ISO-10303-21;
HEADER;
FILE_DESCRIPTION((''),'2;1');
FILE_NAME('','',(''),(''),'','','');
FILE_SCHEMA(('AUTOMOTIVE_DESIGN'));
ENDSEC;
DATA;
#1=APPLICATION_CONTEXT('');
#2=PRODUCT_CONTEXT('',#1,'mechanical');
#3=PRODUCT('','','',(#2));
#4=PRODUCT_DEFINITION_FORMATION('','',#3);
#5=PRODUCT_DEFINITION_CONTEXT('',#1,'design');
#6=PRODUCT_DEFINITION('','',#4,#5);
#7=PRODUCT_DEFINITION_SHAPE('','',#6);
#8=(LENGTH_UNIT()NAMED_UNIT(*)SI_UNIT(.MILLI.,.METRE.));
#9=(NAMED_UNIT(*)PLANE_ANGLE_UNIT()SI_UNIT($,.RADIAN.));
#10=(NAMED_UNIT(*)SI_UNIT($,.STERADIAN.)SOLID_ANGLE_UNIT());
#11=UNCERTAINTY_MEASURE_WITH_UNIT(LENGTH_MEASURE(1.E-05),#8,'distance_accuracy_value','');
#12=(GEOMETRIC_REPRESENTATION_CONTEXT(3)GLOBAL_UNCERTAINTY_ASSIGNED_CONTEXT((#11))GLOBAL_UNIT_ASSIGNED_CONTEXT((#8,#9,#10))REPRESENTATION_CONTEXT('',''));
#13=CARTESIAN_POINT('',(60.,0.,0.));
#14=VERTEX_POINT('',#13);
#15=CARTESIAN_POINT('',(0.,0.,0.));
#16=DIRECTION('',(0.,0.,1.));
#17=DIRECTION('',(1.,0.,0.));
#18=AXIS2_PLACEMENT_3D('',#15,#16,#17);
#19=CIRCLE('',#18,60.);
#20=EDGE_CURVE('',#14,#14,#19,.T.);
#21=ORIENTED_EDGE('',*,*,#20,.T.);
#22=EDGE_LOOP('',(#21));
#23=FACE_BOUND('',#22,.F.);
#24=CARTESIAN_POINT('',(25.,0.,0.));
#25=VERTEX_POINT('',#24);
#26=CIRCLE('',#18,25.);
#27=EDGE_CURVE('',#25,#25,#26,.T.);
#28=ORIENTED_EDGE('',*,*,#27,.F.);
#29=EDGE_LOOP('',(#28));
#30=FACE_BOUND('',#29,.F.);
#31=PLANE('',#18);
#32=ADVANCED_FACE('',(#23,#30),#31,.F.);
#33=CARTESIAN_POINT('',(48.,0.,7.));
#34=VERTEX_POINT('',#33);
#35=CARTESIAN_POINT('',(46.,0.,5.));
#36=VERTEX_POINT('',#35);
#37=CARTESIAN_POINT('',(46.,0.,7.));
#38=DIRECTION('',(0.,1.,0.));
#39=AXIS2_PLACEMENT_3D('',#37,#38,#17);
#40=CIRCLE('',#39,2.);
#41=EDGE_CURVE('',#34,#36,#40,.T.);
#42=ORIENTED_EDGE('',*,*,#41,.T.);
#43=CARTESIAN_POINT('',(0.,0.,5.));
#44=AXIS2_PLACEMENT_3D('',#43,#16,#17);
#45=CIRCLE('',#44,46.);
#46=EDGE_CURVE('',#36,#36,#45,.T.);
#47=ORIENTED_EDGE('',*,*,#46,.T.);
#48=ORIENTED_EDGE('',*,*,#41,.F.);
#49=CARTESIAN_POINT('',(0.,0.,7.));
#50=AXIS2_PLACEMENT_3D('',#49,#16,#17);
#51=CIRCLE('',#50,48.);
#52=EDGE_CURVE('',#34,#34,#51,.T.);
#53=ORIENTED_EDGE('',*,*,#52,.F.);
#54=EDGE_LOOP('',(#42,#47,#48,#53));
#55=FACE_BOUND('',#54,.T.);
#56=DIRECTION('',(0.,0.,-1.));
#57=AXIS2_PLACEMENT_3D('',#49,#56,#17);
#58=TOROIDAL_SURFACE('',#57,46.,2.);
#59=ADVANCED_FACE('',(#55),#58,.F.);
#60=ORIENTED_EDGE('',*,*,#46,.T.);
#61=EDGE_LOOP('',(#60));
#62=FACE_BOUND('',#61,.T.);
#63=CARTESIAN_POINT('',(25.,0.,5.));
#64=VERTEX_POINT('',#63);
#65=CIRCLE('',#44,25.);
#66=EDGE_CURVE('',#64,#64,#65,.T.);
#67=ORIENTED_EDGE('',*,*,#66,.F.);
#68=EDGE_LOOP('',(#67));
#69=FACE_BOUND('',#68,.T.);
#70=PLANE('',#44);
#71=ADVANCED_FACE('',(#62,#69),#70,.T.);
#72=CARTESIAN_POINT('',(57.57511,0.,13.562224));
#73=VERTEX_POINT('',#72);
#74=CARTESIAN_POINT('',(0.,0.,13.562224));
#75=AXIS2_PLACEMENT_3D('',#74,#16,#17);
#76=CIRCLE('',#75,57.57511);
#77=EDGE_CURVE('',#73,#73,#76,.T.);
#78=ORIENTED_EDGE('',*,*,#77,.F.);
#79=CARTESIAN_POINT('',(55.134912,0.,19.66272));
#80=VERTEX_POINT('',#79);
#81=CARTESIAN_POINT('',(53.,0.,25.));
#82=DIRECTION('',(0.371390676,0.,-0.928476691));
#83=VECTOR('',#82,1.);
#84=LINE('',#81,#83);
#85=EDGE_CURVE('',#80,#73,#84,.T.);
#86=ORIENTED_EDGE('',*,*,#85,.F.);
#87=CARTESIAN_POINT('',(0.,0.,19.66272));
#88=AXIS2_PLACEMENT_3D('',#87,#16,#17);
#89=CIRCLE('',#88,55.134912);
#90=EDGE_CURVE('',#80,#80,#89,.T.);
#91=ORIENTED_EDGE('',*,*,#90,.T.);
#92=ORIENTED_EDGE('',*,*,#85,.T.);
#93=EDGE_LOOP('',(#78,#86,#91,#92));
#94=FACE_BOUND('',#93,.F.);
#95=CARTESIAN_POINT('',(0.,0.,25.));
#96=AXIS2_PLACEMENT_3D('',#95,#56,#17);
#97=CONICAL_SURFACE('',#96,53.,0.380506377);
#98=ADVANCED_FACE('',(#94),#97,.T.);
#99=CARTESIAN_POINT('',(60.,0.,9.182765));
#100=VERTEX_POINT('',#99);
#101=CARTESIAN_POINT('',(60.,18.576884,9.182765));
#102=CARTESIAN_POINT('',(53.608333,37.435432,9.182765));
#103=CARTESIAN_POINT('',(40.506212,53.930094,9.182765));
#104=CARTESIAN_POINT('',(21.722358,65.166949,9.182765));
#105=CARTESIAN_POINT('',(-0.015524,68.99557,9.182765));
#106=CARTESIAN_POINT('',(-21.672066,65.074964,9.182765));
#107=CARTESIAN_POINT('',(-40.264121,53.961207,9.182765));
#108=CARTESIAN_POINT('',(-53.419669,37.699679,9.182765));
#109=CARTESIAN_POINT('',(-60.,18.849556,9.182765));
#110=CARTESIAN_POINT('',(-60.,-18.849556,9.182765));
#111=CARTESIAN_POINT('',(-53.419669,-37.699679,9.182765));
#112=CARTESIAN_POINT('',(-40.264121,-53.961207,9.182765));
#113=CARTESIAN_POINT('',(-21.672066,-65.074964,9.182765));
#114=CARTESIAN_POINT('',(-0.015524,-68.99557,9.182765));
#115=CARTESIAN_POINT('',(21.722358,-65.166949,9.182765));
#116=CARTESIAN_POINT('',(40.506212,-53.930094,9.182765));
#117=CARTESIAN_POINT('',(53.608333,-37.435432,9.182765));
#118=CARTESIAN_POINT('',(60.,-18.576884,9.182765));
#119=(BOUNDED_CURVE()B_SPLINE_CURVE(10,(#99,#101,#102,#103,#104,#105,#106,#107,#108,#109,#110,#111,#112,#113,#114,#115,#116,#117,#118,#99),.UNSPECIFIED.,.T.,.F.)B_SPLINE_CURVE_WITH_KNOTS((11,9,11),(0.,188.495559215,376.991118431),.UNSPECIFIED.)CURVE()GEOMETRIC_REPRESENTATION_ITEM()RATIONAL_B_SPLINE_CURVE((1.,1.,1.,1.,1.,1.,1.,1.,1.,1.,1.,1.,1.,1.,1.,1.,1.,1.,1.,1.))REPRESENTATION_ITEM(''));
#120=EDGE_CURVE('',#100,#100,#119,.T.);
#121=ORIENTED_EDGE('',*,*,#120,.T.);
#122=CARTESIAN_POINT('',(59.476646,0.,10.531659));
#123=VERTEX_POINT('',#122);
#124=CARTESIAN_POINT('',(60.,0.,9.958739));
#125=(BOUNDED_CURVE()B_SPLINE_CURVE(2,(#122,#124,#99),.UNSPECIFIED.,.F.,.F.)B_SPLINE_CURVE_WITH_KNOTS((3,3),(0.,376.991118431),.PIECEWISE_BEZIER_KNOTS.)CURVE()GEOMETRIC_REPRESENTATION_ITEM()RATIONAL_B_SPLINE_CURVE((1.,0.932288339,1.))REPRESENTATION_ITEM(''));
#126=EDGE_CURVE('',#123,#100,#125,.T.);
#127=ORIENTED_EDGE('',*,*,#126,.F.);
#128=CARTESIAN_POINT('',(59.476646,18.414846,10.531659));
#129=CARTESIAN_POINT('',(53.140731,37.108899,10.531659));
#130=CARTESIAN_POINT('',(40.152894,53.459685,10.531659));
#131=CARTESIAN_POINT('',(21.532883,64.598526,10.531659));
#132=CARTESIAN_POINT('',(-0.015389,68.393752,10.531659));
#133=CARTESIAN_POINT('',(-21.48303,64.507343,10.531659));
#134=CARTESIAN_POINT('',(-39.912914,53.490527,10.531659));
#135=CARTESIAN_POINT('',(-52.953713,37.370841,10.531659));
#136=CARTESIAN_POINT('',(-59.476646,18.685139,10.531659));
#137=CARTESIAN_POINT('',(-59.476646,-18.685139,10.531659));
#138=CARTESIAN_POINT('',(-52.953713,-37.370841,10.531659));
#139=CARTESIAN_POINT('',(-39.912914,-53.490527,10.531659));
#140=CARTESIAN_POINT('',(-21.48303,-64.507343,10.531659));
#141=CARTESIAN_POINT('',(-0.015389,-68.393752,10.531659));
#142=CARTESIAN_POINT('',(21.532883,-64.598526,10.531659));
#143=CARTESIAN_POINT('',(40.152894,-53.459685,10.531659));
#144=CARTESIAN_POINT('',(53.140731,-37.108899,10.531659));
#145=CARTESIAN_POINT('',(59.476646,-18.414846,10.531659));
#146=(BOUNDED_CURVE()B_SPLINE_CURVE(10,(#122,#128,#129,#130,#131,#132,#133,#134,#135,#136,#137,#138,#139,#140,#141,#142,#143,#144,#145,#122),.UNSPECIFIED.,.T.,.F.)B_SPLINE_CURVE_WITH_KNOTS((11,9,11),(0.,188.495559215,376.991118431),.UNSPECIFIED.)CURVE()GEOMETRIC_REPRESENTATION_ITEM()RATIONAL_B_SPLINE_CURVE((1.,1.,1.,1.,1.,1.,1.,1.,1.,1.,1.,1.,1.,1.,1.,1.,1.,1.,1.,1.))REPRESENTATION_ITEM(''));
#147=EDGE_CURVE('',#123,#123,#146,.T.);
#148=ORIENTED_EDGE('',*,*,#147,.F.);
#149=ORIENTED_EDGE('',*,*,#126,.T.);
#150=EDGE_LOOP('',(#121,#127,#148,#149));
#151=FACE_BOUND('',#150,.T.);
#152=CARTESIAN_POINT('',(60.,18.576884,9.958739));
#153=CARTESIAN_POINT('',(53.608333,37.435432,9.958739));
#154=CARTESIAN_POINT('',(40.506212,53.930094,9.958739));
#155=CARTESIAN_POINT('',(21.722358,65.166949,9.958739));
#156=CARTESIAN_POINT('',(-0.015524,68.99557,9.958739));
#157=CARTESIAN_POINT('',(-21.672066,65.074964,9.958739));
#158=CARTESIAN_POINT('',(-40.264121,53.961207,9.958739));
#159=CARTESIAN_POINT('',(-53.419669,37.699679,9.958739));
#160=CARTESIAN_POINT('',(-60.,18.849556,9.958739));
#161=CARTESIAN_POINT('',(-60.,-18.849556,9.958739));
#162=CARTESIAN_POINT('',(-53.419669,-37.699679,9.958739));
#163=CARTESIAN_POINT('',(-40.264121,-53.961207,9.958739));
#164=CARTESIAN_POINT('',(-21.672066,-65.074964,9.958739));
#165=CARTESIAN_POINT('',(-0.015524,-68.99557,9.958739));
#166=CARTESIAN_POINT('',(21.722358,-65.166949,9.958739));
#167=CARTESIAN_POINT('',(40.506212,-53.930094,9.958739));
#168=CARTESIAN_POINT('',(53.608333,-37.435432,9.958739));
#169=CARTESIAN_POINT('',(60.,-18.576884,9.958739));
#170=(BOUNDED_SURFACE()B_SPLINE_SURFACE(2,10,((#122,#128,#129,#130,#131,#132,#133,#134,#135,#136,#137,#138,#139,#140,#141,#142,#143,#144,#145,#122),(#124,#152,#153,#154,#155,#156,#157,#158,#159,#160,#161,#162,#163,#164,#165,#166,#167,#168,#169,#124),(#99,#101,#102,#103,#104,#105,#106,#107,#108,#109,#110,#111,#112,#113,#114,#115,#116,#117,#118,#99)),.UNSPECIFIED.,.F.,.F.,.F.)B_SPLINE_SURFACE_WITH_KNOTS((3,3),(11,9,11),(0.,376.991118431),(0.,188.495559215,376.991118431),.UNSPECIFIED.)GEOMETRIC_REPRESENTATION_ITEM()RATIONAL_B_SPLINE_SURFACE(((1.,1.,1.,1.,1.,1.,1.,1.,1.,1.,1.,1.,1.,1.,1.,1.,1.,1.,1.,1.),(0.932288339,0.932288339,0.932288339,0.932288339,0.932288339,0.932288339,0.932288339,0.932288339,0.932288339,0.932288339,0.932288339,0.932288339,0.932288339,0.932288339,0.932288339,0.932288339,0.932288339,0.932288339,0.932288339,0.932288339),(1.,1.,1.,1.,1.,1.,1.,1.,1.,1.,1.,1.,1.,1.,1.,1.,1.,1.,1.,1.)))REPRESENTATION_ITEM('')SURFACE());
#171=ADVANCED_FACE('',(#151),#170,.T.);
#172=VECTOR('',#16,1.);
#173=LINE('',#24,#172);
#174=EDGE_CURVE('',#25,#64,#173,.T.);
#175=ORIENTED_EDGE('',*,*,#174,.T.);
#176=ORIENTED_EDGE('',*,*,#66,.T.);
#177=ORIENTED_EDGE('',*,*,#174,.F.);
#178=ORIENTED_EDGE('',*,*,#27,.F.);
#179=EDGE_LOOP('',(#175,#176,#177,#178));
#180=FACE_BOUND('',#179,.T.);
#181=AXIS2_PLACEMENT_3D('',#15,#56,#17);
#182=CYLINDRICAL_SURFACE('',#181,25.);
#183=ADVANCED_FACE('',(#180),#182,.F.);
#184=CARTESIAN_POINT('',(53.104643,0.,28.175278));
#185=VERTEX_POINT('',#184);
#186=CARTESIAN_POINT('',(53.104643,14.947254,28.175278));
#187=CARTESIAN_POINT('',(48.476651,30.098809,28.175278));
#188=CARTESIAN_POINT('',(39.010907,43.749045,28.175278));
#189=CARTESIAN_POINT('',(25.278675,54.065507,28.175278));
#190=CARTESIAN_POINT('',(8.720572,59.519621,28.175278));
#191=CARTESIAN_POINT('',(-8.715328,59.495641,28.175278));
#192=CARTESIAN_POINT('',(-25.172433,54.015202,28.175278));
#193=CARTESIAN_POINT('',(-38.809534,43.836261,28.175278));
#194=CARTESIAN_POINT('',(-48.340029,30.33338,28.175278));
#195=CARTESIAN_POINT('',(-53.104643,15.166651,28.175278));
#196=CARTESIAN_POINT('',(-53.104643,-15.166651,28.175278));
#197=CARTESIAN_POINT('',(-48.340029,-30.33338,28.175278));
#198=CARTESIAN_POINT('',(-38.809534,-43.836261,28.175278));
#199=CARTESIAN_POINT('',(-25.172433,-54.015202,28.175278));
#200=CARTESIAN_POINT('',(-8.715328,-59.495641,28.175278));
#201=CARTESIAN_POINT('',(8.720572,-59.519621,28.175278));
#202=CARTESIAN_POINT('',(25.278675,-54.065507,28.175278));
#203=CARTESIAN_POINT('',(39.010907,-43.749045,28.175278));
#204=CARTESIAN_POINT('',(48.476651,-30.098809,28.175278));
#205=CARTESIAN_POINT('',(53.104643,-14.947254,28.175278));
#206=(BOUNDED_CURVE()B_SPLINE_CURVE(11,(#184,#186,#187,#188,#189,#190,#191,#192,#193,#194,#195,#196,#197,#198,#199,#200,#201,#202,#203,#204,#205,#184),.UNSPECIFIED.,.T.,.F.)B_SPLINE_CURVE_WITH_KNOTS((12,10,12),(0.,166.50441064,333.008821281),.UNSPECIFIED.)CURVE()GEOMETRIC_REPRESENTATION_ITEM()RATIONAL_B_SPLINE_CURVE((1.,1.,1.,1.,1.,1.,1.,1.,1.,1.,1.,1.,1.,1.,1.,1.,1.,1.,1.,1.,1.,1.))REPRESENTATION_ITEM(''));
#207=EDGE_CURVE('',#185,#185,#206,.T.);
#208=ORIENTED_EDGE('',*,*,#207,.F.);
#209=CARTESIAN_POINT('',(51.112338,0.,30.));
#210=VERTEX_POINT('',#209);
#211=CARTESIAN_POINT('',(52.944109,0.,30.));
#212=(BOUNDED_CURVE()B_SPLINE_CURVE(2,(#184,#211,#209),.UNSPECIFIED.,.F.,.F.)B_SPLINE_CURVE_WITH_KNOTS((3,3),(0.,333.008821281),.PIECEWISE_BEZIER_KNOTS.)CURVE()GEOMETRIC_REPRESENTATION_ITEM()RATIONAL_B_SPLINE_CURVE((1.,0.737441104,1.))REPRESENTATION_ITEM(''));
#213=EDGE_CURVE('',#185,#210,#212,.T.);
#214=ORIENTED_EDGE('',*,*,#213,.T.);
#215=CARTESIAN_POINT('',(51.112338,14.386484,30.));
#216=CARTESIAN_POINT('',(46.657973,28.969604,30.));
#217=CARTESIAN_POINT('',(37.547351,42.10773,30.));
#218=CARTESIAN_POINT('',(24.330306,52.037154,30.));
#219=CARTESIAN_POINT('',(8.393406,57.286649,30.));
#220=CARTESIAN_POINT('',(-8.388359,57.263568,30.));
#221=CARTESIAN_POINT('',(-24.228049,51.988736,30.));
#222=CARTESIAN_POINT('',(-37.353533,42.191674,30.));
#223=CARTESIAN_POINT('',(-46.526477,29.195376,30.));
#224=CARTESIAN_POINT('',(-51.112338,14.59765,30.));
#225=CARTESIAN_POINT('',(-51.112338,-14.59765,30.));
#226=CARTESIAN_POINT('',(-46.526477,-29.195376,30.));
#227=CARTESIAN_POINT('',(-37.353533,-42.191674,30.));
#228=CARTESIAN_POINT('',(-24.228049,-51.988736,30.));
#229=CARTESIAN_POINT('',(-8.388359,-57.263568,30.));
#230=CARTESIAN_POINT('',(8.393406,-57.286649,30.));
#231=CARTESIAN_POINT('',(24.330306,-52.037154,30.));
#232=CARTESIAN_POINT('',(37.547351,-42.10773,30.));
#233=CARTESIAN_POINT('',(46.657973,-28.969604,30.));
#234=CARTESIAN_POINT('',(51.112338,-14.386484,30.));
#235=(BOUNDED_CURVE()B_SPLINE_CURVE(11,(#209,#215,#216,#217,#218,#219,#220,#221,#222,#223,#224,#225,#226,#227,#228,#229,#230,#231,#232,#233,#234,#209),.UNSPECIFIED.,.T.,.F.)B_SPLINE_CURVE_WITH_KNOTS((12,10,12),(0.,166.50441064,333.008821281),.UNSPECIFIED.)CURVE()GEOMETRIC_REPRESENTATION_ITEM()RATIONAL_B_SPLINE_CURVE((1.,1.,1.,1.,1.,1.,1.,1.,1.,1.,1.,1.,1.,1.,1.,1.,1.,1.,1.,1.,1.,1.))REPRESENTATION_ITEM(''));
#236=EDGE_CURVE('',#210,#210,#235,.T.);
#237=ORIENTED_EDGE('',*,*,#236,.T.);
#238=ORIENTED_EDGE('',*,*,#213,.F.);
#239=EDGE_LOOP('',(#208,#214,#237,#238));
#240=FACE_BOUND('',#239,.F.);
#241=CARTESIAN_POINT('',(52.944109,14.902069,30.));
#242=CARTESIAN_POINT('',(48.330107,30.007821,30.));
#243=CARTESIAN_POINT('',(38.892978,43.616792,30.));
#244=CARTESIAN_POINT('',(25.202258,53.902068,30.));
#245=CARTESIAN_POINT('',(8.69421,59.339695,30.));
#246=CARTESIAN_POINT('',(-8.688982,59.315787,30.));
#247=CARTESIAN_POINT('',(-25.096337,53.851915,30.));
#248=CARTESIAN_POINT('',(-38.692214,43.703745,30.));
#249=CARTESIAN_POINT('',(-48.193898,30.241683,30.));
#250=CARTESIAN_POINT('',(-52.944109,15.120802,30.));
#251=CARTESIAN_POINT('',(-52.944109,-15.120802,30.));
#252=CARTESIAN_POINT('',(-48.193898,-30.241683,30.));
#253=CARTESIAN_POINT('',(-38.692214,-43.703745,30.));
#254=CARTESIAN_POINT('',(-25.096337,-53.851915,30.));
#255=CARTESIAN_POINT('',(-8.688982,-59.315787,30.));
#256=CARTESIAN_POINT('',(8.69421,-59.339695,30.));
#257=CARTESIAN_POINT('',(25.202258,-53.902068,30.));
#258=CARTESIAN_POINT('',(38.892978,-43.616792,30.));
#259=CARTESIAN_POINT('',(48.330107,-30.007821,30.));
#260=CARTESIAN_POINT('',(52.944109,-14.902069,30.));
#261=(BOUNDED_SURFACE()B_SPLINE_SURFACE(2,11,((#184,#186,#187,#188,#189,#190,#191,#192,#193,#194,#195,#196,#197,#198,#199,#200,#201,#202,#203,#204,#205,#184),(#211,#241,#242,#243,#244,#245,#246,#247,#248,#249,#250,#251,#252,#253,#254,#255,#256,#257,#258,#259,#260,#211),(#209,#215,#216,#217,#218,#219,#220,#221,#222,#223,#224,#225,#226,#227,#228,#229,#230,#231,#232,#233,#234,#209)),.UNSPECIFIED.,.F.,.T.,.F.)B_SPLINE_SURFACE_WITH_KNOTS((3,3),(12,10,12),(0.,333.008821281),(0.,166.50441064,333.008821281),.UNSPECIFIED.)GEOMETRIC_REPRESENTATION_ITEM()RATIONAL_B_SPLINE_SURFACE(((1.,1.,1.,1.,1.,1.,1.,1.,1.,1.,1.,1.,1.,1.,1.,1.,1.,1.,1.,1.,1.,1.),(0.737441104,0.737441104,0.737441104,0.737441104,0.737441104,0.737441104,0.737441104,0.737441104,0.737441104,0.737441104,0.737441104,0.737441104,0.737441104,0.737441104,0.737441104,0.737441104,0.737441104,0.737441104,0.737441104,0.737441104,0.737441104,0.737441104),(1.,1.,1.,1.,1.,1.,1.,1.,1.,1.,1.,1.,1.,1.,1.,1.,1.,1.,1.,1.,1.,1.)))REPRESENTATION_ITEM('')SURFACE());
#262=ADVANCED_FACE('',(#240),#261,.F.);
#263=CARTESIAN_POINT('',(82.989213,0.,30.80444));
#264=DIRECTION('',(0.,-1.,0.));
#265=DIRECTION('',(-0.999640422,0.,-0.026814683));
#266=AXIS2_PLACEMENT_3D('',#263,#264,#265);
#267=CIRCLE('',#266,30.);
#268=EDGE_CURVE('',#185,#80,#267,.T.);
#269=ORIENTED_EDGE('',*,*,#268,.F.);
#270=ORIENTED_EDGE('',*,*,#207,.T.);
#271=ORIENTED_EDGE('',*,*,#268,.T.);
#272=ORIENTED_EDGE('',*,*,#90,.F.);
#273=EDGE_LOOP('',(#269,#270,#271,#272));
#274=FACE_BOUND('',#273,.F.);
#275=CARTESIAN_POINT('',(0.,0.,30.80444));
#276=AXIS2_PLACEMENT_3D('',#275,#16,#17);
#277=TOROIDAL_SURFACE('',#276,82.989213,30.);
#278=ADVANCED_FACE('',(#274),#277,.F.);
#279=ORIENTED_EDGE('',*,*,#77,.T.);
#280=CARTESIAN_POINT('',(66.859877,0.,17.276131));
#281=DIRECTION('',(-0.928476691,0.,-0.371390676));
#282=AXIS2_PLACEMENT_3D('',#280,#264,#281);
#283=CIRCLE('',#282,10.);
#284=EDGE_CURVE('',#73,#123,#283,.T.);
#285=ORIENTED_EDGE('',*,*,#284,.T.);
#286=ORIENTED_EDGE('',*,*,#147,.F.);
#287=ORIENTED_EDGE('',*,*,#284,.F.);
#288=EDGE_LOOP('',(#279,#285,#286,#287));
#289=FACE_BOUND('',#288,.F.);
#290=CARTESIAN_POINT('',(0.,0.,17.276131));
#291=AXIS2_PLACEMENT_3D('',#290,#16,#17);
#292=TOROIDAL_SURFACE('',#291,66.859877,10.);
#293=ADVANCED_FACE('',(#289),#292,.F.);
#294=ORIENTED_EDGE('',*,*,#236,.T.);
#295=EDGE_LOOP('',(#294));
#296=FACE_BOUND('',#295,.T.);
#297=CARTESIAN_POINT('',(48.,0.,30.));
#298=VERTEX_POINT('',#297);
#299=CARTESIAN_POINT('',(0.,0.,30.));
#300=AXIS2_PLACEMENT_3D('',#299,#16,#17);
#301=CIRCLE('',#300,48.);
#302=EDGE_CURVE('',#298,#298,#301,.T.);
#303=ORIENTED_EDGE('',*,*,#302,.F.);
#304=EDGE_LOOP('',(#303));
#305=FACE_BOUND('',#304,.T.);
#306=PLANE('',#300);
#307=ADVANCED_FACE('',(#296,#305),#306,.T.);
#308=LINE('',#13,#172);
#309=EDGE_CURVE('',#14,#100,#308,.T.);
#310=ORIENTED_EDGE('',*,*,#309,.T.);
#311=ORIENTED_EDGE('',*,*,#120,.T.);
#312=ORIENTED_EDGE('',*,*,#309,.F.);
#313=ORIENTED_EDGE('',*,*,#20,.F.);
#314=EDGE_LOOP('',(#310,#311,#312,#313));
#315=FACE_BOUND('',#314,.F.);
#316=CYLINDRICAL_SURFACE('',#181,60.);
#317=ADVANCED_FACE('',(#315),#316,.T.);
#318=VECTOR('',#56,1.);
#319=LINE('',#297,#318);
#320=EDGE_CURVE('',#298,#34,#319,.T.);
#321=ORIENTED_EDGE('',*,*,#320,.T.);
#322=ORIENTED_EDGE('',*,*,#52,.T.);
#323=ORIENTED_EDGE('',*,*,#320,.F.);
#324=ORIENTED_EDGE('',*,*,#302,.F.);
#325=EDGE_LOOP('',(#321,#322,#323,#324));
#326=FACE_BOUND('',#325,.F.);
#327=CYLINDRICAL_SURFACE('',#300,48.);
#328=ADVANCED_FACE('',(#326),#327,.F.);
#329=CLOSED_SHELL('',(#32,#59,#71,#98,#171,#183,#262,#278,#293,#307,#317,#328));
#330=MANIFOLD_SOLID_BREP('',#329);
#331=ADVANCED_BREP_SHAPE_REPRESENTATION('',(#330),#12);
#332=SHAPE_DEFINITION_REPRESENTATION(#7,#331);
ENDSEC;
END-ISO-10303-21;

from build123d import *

# Parameters (mm, degrees)
F0_R     = 60
F0_R_2   = 25
F1_DEPTH = 30
F2_R     = 48
F2_R_2   = 25
F3_DEPTH = 25
F4_R     = 2
F5_R     = 60
F5_R_2   = 53
F6_DEPTH = 20
F7_SIZE2 = 6
F7_SIZE  = 15
F10_R    = 2
F11_R    = 2


# Not quite as in the source:
# - a fillet or chamfer that OpenCascade refuses, or shapes differently, is made with other operations: its cross-section is extruded or revolved along the edge and cut away or added


with BuildPart() as f1:
    # F0 (on Top) → F1 (new body)
    with BuildSketch(Plane.XY):
        Circle(F0_R)
        Circle(F0_R_2, mode=Mode.SUBTRACT)
    extrude(amount=F1_DEPTH)

    # F2 (on face) → F3 (cut)
    with BuildSketch(Plane.XY.offset(30)):
        Circle(F2_R)
        Circle(F2_R_2, mode=Mode.SUBTRACT)
    extrude(amount=-F3_DEPTH, mode=Mode.SUBTRACT)

    # F4
    f4_edges = [f1.edges().sort_by_distance(p)[0] for p in [
        (-48, 0, 5),
    ]]
    fillet(f4_edges, radius=F4_R)

    # F5 (on face) → F6 (cut)
    with BuildSketch(Plane.XY.offset(30)):
        Circle(F5_R)
        Circle(F5_R_2, mode=Mode.SUBTRACT)
    extrude(amount=-F6_DEPTH, mode=Mode.SUBTRACT)

    # F7
    f7_edges = [f1.edges().sort_by_distance(p)[0] for p in [
        (-53, 0, 10),
    ]]
    chamfer(f7_edges, length=F7_SIZE, length2=F7_SIZE2)

    # F8: fillet of radius 10 on 1 edges, made by hand

    # F8_s1 → F8_t2 (revolve)
    with BuildSketch(Plane.XZ):
        with BuildLine():
            ThreePointArc((57.575110205, 13.5622244876), (58.5933939753, 11.6489422086), (60, 10))
            Line((60, 10), (59, 10))
            Line((59, 10), (57.575110205, 13.5622244876))
        make_face()
    revolve(axis=Axis((0, 0, 10), (0, 0, 1)))

    # F9: fillet of radius 30 on 1 edges, made by hand

    # F9_s1 → F9_t2 (revolve)
    with BuildSketch(Plane.XZ):
        with BuildLine():
            ThreePointArc((53, 30), (53.6092390565, 24.7367266148), (55.134911926, 19.662720185))
            Line((55.134911926, 19.662720185), (53, 25))
            Line((53, 25), (53, 30))
        make_face()
    revolve(axis=Axis((0, 0, 25), (0, 0, 1)))

    # F10
    f10_edges = [f1.edges().sort_by_distance(p)[0] for p in [
        (-60, 0, 10),
    ]]
    fillet(f10_edges, radius=F10_R)

    # F11
    f11_edges = [f1.edges().sort_by_distance(p)[0] for p in [
        (-53, 0, 30),
    ]]
    fillet(f11_edges, radius=F11_R)


solid = f1.part
